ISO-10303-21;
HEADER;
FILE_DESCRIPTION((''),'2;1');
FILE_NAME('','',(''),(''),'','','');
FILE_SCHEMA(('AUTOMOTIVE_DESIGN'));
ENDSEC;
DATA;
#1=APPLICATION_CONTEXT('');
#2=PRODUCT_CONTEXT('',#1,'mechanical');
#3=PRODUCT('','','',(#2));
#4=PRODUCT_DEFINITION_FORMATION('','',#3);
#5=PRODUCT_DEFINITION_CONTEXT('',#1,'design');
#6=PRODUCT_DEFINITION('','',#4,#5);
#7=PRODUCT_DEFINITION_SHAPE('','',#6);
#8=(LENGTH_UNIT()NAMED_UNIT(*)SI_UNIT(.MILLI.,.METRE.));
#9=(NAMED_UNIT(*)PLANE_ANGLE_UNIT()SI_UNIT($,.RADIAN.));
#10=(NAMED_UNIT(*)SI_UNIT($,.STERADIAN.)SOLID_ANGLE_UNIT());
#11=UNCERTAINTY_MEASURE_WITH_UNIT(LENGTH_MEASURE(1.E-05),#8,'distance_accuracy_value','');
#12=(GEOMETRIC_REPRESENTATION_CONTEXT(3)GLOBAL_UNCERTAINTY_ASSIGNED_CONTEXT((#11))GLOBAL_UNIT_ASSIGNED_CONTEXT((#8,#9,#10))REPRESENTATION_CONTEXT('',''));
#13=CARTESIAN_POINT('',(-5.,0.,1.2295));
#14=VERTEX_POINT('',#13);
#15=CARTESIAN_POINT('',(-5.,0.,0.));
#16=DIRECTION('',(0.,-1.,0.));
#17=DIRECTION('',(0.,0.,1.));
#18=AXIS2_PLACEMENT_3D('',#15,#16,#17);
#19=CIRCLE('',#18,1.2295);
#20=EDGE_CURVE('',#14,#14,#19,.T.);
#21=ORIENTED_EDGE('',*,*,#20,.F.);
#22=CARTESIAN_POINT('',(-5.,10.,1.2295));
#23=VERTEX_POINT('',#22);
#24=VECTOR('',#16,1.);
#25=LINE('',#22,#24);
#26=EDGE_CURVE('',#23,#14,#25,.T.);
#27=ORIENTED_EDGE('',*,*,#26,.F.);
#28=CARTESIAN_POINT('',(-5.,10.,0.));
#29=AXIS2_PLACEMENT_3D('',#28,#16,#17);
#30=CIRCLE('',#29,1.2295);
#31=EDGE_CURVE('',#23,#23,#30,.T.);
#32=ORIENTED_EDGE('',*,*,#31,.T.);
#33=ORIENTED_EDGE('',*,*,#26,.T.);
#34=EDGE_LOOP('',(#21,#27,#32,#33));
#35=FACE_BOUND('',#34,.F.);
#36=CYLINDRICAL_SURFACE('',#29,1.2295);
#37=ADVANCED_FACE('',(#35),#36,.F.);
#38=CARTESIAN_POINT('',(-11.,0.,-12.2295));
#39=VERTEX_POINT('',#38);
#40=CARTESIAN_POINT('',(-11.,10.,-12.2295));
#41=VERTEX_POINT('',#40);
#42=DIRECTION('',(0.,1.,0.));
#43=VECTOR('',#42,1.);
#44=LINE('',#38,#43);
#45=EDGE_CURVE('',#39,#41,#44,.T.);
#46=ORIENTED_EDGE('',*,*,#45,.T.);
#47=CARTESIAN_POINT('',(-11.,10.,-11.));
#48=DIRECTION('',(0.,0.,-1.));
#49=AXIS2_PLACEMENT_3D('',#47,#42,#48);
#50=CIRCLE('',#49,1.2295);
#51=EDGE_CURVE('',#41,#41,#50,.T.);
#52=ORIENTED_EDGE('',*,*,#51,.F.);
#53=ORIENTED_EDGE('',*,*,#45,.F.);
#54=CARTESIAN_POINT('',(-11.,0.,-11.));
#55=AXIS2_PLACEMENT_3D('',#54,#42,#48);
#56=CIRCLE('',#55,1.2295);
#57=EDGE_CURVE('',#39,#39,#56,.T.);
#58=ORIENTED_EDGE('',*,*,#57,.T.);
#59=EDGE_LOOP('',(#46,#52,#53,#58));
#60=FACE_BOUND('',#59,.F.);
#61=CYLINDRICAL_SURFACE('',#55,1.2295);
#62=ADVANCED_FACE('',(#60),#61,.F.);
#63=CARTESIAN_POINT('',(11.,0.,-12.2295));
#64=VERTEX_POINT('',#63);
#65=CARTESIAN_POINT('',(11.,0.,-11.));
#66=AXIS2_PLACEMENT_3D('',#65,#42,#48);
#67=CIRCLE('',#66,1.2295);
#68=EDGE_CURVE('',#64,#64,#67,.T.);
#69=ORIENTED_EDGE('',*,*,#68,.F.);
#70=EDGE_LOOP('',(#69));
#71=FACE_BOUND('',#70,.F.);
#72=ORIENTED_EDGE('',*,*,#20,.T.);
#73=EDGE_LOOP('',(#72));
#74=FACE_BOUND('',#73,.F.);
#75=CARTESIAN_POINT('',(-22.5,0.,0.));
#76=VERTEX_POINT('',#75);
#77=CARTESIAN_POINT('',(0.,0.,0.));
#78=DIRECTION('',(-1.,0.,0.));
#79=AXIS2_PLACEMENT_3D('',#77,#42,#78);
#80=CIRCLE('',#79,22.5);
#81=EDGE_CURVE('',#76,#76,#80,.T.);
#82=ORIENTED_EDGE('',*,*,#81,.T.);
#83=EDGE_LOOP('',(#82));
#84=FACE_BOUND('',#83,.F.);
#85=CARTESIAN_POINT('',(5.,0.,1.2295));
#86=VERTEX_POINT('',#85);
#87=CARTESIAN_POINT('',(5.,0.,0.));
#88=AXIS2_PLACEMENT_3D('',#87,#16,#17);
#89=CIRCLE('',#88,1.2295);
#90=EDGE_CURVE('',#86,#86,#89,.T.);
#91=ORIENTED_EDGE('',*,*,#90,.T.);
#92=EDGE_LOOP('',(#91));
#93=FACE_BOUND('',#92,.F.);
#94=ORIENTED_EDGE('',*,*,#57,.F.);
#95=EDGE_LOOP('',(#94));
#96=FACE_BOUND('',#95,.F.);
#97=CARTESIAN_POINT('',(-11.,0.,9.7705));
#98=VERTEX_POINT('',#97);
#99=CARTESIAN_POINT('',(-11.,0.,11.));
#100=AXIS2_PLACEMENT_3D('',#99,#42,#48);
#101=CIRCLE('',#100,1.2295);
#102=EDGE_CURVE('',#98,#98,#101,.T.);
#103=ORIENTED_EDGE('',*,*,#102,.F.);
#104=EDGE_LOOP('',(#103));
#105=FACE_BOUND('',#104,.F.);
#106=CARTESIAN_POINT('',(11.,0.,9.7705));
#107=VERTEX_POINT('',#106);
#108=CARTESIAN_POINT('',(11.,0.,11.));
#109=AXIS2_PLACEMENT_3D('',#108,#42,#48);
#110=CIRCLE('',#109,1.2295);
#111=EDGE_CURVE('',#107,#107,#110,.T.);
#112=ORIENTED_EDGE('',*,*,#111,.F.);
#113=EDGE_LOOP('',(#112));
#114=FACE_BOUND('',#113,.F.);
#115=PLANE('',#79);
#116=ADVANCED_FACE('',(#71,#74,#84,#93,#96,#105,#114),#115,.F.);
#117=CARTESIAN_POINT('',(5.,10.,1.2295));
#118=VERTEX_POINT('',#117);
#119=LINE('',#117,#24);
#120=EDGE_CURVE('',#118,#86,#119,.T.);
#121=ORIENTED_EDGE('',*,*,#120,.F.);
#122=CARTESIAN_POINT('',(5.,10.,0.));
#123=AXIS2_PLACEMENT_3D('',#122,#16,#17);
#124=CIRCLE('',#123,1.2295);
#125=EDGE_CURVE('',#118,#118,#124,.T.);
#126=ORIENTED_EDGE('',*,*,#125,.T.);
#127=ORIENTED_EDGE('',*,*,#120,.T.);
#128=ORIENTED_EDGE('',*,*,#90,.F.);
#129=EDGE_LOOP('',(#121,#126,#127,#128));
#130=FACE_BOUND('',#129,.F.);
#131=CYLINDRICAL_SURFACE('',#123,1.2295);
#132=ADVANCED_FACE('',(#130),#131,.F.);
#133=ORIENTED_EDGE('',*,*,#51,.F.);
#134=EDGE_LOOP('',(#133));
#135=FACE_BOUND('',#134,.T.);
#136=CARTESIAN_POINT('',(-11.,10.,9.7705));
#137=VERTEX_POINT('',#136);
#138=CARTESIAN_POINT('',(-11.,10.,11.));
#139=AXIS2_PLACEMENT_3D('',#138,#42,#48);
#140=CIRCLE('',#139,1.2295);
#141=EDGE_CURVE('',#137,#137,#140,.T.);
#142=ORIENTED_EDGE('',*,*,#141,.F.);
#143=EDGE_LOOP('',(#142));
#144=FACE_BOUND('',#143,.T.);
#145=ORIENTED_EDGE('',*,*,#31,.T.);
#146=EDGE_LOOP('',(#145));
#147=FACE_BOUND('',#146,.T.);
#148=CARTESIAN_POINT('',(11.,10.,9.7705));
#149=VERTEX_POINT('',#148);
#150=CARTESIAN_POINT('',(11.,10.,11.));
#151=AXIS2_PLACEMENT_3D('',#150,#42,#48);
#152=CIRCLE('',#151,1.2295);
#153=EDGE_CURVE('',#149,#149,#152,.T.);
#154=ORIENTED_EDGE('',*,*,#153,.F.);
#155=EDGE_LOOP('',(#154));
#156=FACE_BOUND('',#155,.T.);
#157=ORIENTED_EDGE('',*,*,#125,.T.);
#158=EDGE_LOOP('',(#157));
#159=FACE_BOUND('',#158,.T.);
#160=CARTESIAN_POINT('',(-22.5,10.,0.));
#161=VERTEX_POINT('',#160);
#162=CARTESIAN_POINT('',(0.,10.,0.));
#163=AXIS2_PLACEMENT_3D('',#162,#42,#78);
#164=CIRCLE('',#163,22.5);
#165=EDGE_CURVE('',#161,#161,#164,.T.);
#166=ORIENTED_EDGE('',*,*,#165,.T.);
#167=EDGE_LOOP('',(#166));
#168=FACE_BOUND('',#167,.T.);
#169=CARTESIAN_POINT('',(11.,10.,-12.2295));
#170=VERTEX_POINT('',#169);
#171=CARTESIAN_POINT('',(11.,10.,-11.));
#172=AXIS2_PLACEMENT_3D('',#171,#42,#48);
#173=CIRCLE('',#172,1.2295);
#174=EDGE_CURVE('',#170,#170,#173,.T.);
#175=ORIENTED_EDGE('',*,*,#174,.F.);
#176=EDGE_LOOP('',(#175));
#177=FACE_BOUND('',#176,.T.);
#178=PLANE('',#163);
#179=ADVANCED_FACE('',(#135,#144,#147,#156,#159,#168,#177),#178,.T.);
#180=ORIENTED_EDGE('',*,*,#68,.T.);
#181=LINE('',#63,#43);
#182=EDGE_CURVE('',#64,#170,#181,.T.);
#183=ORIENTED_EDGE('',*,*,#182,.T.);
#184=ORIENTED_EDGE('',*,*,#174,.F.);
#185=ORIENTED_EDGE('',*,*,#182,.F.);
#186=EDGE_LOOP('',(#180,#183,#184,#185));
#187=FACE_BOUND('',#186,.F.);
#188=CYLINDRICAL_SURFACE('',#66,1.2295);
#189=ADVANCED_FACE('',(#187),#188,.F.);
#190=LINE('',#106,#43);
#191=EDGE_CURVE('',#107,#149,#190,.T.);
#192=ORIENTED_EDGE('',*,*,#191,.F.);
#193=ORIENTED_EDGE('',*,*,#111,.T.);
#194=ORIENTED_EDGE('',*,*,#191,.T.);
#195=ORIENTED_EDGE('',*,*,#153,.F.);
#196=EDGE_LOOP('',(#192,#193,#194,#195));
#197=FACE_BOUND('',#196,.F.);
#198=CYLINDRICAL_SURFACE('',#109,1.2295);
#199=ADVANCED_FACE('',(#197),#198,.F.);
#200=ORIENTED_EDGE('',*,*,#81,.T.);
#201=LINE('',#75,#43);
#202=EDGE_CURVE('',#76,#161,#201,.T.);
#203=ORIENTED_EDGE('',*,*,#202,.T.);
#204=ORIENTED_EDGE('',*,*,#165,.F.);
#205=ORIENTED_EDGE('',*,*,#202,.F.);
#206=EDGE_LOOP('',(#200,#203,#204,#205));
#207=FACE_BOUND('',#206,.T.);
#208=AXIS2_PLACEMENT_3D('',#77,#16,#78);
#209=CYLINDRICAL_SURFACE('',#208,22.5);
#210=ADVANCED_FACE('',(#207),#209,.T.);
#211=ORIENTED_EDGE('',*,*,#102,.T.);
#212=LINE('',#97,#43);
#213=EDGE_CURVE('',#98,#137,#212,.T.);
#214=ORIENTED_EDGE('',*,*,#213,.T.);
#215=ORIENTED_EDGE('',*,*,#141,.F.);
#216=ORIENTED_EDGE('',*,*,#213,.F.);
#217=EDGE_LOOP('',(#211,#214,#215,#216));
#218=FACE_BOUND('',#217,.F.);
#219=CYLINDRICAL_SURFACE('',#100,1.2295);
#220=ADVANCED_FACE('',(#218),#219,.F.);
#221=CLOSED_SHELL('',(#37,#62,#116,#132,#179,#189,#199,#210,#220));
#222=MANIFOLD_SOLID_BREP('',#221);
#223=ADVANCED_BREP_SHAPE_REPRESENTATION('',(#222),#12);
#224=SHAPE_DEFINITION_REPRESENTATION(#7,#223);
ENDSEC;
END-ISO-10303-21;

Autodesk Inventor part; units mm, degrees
ref_plane "YZ Plane" through (0, 0, 0) normal (1, 0, 0) x (0, 1, 0)
ref_plane "XZ Plane" through (0, 0, 0) normal (0, 1, 0) x (-1, 0, 0)
ref_plane "XY Plane" through (0, 0, 0) normal (0, 0, 1) x (1, 0, 0)
sketch "Эскиз1" plane through (0, 0, 0) normal (0, 1, 0) x (-1, 0, 0)
  circle A0 centre (0, 0) radius 22.5
  dimension "d0" = 45
extrude "Выдавливание1" add sketch "Эскиз1" along normal blind 10
sketch "Эскиз2" plane through (0, 10, 0) normal (0, 1, 0) x (1, 0, 0)
  line L0 (0, 0) -> (-5, 0)
  line L1 (-5, 0) -> (5, 0)
  dimension "d3" = 5
  dimension "d4" = 10
hole "Отверстие1" at (-5, 10, 0) at (5, 10, 0) direction (0, -1, 0) diameter 2.459 end through all thread size "M3x0.5" class "6H" standard "ISO Metric profile"
sketch "Эскиз3" plane through (0, 10, 0) normal (0, 1, 0) x (1, 0, 0)
  point P0 (0, 0)
sketch "Эскиз4" plane through (0, 0, 0) normal (0, -1, 0) x (1, 0, 0)
  line L0 (15.5563, 15.5563) -> (-15.5563, 15.5563)
  line L1 (-15.5563, 15.5563) -> (-15.5563, -15.5563)
  line L2 (-15.5563, -15.5563) -> (15.5563, -15.5563)
  line L3 (15.5563, -15.5563) -> (15.5563, 15.5563)
  line L4 (15.5563, 15.5563) -> (-15.5563, -15.5563)
  line L5 (15.5563, -15.5563) -> (-15.5563, 15.5563)
  line L6 (-11, 11) -> (11, 11)
  line L7 (11, 11) -> (11, -11)
  line L8 (11, -11) -> (-11, -11)
  line L9 (-11, -11) -> (-11, 11)
  point P0 (0, 0)
  dimension "d23" = 22
hole "Отверстие2" at (11, 0, -11) at (-11, 0, 11) at (11, 0, 11) at (-11, 0, -11) direction (0, 1, 0) diameter 2.459 end through all thread size "M3x0.5" class "6H" standard "ISO Metric profile"
properties part number "Диск (маховик, вал)"
